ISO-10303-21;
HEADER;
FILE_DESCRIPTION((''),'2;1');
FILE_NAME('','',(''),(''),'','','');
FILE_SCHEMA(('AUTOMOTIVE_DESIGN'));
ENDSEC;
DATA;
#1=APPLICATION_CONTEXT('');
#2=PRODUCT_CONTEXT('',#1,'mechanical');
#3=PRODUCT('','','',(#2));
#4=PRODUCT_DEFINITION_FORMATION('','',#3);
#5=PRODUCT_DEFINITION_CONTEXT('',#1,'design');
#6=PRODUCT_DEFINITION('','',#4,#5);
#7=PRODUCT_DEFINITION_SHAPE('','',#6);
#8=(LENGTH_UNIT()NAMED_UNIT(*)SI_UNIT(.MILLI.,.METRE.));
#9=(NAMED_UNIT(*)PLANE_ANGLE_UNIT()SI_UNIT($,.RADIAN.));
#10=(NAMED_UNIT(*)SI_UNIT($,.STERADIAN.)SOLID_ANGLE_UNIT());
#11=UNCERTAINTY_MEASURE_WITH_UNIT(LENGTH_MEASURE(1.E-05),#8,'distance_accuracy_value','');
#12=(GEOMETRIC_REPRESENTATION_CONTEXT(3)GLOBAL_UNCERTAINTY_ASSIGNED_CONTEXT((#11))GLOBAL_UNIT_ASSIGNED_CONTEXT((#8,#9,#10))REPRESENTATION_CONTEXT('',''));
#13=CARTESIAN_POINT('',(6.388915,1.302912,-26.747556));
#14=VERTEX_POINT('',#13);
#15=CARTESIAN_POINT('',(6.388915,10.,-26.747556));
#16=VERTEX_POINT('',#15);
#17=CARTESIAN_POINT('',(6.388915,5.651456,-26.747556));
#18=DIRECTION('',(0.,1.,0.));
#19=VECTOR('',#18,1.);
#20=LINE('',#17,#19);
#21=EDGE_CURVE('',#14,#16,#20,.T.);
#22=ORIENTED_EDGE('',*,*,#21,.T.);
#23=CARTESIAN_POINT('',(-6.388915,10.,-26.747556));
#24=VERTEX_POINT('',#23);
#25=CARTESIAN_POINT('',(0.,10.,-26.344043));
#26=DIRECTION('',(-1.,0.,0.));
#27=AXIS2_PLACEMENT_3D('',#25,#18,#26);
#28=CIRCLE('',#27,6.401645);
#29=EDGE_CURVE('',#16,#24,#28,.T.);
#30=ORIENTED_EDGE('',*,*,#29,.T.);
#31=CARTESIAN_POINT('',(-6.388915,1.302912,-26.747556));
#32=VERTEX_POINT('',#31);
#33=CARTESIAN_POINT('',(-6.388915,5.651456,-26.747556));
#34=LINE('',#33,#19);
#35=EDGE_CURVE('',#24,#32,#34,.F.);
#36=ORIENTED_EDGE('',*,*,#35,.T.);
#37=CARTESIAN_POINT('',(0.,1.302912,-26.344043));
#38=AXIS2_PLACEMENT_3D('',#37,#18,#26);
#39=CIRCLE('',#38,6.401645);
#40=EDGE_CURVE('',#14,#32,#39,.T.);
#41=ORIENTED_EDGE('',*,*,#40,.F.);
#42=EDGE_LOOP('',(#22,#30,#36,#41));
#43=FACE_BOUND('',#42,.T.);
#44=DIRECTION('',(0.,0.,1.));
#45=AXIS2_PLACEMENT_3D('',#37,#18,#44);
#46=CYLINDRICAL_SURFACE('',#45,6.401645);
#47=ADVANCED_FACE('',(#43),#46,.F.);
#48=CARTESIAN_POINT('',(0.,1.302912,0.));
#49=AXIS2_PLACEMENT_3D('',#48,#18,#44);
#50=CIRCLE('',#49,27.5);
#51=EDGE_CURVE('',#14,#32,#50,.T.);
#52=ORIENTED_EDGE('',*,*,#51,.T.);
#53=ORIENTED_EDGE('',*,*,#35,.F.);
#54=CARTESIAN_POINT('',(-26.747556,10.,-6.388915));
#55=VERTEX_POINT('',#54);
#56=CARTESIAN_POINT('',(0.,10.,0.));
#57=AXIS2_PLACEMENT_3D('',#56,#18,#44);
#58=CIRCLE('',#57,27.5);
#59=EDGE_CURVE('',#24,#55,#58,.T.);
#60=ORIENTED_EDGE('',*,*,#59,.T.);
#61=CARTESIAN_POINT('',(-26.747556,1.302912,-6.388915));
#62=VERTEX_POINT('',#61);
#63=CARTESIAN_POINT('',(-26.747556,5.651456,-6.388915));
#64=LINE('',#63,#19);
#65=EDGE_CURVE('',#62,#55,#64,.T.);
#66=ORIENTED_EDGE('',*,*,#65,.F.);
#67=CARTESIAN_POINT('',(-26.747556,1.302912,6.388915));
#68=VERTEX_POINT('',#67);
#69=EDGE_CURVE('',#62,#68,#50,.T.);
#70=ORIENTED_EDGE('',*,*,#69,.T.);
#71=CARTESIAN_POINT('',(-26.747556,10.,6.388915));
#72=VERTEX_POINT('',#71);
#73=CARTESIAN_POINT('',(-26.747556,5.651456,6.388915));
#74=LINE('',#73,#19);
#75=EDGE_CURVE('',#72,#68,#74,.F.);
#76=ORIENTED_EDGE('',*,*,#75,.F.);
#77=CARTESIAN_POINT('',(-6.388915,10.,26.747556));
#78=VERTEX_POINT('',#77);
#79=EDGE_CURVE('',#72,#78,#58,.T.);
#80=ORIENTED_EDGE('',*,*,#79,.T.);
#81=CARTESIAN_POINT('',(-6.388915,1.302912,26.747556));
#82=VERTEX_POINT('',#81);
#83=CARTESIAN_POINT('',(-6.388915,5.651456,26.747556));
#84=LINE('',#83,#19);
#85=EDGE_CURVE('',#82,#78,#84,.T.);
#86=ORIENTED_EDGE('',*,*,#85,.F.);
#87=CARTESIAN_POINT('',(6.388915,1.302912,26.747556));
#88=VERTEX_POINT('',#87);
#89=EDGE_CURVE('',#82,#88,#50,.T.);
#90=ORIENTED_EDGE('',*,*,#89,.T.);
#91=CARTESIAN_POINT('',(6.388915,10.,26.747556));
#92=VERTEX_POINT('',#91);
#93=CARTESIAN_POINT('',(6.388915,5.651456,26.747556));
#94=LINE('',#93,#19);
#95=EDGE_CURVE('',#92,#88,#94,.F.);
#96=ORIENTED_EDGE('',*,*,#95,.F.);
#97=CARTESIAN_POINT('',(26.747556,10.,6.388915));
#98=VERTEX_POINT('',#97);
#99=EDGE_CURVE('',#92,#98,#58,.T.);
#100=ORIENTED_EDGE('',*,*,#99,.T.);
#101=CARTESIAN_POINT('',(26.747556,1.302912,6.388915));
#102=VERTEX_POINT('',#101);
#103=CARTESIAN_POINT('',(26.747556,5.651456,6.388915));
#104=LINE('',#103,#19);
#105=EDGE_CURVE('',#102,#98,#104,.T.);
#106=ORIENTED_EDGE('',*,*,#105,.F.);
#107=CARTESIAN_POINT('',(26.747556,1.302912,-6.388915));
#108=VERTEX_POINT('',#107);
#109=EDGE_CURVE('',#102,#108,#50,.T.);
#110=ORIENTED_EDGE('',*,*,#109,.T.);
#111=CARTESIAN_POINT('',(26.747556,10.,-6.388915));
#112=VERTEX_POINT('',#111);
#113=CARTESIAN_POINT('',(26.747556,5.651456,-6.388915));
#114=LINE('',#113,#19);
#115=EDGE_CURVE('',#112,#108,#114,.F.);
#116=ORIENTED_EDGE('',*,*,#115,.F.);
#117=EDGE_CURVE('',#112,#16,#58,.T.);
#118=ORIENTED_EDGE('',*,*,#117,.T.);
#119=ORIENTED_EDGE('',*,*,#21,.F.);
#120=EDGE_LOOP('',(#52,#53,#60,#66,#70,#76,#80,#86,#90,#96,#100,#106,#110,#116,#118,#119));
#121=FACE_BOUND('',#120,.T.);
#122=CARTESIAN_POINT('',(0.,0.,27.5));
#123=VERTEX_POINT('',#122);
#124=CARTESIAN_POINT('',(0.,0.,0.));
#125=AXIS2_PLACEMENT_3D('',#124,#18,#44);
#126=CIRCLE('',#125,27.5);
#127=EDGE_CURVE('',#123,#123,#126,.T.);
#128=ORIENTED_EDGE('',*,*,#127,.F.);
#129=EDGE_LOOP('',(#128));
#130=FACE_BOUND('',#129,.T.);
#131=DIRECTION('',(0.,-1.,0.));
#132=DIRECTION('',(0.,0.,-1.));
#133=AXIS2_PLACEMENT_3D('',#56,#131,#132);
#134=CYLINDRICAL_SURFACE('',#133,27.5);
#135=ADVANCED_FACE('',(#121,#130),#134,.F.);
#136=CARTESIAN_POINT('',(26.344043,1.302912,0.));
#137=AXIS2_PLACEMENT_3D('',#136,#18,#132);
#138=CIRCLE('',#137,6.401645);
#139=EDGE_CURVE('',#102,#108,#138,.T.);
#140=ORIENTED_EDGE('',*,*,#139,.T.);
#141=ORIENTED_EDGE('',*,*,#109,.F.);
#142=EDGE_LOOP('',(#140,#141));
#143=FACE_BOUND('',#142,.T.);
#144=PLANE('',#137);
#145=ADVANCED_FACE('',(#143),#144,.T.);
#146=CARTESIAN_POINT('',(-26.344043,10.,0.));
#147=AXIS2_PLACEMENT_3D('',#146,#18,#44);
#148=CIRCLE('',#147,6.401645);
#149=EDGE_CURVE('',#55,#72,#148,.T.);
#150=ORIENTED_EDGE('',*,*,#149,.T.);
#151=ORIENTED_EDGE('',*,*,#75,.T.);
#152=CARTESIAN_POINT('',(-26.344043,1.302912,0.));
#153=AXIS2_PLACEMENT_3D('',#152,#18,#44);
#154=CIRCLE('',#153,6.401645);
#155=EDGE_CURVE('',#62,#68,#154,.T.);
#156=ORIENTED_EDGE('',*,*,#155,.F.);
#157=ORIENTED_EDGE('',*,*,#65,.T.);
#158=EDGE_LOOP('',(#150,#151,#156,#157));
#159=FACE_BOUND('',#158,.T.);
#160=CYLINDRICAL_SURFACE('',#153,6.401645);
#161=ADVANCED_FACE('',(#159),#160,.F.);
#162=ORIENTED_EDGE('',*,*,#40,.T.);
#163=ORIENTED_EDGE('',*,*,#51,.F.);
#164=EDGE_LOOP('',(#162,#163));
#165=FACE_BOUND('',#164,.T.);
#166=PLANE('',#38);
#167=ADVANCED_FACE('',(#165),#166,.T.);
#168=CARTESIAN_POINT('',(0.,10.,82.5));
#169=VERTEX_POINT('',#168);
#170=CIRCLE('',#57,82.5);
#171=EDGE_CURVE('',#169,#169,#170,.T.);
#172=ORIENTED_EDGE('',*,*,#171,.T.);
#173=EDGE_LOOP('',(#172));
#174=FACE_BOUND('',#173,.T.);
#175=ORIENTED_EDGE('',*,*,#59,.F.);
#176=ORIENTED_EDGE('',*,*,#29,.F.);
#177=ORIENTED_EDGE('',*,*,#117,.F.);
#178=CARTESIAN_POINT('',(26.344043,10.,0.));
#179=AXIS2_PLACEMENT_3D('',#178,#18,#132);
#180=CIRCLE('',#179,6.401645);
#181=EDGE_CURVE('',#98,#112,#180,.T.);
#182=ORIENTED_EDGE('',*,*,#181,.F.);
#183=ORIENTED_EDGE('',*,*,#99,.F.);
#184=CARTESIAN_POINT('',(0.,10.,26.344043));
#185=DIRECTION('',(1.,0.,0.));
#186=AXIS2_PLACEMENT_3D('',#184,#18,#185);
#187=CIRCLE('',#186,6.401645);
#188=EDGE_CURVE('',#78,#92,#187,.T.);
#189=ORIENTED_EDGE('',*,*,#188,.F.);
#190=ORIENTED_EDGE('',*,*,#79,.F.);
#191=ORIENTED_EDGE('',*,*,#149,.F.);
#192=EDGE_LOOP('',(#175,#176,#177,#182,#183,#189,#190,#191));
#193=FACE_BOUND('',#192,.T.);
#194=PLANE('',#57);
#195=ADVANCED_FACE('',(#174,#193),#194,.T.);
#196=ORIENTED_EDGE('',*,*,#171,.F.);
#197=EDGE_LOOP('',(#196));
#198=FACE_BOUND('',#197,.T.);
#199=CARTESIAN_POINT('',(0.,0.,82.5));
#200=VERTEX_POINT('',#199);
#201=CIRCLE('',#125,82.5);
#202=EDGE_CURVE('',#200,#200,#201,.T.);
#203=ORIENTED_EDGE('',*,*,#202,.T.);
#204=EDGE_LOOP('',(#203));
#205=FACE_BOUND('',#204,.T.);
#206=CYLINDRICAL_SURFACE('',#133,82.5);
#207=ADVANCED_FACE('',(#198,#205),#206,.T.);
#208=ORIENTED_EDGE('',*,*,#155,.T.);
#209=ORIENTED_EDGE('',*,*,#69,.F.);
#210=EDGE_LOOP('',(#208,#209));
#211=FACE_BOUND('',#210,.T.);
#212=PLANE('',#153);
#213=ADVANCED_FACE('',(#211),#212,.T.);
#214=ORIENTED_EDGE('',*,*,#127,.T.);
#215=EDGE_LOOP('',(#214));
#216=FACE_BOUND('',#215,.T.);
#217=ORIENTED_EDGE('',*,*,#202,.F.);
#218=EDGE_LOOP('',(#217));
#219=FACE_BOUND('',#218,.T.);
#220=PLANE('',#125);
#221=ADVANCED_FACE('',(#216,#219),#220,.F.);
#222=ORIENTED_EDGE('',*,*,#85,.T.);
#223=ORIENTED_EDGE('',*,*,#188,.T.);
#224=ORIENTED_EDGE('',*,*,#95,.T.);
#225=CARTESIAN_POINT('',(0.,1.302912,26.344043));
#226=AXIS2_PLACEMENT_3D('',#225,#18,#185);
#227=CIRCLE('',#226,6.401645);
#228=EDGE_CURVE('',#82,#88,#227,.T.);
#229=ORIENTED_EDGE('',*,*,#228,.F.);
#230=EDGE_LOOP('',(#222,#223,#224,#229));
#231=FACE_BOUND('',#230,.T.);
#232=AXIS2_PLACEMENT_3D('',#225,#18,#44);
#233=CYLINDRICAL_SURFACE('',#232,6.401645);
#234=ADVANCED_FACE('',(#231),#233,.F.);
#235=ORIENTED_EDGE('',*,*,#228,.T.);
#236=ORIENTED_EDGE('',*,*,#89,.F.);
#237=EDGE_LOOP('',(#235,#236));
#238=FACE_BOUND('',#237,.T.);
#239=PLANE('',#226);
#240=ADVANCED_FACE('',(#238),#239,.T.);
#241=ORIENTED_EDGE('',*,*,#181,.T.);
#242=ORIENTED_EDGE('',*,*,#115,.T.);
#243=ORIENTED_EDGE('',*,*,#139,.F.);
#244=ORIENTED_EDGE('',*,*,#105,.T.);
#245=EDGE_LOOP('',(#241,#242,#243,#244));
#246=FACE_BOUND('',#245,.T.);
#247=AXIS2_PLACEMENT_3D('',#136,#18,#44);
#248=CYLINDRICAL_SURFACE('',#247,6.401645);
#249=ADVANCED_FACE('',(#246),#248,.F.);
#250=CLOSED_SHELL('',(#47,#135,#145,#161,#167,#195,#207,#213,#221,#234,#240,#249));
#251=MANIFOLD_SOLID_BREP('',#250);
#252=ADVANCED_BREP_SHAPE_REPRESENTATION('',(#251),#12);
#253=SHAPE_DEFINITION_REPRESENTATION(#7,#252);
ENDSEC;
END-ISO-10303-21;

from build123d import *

# Parameters (mm, degrees)
SKETCH1_R           = 82.5
BOSS_EXTRUDE1_DEPTH = 10
SKETCH2_R           = 27.5
CUT_EXTRUDE1_DEPTH  = 118.100384286
SKETCH3_R           = 6.401645326
CUT_EXTRUDE2_DEPTH  = 8.697088467
CIRPATTERN1_COUNT   = 4


with BuildPart() as part:
    # Sketch1 → Boss-Extrude1 (new body)
    with BuildSketch(Plane(origin=(0, 0, 0), x_dir=(1, 0, 0), z_dir=(0, 1, 0))):
        Circle(SKETCH1_R)
    extrude(amount=BOSS_EXTRUDE1_DEPTH)

    # Sketch2 → Cut-Extrude1 (cut, through all)
    with BuildSketch(Plane(origin=(0, 0, 0), x_dir=(1, 0, 0), z_dir=(0, 1, 0))):
        Circle(SKETCH2_R)
    extrude(amount=CUT_EXTRUDE1_DEPTH, mode=Mode.SUBTRACT)

    # Sketch3 → Cut-Extrude2 (cut)
    with BuildSketch(Plane(origin=(0, 10, 0), x_dir=(1, 0, 0), z_dir=(0, 1, 0))):
        with Locations((-26.344042575, 0)):
            Circle(SKETCH3_R)
    cut_extrude2 = extrude(amount=-CUT_EXTRUDE2_DEPTH, mode=Mode.SUBTRACT)

    # CirPattern1: Cut-Extrude2 ×4 about axis
    cirpattern1_axis = Axis((0, 0, 0), (0, 1, 0))
    for i in range(1, CIRPATTERN1_COUNT):
        add(cut_extrude2.rotate(cirpattern1_axis, i * 360 / CIRPATTERN1_COUNT), mode=Mode.SUBTRACT)


solid = part.part
